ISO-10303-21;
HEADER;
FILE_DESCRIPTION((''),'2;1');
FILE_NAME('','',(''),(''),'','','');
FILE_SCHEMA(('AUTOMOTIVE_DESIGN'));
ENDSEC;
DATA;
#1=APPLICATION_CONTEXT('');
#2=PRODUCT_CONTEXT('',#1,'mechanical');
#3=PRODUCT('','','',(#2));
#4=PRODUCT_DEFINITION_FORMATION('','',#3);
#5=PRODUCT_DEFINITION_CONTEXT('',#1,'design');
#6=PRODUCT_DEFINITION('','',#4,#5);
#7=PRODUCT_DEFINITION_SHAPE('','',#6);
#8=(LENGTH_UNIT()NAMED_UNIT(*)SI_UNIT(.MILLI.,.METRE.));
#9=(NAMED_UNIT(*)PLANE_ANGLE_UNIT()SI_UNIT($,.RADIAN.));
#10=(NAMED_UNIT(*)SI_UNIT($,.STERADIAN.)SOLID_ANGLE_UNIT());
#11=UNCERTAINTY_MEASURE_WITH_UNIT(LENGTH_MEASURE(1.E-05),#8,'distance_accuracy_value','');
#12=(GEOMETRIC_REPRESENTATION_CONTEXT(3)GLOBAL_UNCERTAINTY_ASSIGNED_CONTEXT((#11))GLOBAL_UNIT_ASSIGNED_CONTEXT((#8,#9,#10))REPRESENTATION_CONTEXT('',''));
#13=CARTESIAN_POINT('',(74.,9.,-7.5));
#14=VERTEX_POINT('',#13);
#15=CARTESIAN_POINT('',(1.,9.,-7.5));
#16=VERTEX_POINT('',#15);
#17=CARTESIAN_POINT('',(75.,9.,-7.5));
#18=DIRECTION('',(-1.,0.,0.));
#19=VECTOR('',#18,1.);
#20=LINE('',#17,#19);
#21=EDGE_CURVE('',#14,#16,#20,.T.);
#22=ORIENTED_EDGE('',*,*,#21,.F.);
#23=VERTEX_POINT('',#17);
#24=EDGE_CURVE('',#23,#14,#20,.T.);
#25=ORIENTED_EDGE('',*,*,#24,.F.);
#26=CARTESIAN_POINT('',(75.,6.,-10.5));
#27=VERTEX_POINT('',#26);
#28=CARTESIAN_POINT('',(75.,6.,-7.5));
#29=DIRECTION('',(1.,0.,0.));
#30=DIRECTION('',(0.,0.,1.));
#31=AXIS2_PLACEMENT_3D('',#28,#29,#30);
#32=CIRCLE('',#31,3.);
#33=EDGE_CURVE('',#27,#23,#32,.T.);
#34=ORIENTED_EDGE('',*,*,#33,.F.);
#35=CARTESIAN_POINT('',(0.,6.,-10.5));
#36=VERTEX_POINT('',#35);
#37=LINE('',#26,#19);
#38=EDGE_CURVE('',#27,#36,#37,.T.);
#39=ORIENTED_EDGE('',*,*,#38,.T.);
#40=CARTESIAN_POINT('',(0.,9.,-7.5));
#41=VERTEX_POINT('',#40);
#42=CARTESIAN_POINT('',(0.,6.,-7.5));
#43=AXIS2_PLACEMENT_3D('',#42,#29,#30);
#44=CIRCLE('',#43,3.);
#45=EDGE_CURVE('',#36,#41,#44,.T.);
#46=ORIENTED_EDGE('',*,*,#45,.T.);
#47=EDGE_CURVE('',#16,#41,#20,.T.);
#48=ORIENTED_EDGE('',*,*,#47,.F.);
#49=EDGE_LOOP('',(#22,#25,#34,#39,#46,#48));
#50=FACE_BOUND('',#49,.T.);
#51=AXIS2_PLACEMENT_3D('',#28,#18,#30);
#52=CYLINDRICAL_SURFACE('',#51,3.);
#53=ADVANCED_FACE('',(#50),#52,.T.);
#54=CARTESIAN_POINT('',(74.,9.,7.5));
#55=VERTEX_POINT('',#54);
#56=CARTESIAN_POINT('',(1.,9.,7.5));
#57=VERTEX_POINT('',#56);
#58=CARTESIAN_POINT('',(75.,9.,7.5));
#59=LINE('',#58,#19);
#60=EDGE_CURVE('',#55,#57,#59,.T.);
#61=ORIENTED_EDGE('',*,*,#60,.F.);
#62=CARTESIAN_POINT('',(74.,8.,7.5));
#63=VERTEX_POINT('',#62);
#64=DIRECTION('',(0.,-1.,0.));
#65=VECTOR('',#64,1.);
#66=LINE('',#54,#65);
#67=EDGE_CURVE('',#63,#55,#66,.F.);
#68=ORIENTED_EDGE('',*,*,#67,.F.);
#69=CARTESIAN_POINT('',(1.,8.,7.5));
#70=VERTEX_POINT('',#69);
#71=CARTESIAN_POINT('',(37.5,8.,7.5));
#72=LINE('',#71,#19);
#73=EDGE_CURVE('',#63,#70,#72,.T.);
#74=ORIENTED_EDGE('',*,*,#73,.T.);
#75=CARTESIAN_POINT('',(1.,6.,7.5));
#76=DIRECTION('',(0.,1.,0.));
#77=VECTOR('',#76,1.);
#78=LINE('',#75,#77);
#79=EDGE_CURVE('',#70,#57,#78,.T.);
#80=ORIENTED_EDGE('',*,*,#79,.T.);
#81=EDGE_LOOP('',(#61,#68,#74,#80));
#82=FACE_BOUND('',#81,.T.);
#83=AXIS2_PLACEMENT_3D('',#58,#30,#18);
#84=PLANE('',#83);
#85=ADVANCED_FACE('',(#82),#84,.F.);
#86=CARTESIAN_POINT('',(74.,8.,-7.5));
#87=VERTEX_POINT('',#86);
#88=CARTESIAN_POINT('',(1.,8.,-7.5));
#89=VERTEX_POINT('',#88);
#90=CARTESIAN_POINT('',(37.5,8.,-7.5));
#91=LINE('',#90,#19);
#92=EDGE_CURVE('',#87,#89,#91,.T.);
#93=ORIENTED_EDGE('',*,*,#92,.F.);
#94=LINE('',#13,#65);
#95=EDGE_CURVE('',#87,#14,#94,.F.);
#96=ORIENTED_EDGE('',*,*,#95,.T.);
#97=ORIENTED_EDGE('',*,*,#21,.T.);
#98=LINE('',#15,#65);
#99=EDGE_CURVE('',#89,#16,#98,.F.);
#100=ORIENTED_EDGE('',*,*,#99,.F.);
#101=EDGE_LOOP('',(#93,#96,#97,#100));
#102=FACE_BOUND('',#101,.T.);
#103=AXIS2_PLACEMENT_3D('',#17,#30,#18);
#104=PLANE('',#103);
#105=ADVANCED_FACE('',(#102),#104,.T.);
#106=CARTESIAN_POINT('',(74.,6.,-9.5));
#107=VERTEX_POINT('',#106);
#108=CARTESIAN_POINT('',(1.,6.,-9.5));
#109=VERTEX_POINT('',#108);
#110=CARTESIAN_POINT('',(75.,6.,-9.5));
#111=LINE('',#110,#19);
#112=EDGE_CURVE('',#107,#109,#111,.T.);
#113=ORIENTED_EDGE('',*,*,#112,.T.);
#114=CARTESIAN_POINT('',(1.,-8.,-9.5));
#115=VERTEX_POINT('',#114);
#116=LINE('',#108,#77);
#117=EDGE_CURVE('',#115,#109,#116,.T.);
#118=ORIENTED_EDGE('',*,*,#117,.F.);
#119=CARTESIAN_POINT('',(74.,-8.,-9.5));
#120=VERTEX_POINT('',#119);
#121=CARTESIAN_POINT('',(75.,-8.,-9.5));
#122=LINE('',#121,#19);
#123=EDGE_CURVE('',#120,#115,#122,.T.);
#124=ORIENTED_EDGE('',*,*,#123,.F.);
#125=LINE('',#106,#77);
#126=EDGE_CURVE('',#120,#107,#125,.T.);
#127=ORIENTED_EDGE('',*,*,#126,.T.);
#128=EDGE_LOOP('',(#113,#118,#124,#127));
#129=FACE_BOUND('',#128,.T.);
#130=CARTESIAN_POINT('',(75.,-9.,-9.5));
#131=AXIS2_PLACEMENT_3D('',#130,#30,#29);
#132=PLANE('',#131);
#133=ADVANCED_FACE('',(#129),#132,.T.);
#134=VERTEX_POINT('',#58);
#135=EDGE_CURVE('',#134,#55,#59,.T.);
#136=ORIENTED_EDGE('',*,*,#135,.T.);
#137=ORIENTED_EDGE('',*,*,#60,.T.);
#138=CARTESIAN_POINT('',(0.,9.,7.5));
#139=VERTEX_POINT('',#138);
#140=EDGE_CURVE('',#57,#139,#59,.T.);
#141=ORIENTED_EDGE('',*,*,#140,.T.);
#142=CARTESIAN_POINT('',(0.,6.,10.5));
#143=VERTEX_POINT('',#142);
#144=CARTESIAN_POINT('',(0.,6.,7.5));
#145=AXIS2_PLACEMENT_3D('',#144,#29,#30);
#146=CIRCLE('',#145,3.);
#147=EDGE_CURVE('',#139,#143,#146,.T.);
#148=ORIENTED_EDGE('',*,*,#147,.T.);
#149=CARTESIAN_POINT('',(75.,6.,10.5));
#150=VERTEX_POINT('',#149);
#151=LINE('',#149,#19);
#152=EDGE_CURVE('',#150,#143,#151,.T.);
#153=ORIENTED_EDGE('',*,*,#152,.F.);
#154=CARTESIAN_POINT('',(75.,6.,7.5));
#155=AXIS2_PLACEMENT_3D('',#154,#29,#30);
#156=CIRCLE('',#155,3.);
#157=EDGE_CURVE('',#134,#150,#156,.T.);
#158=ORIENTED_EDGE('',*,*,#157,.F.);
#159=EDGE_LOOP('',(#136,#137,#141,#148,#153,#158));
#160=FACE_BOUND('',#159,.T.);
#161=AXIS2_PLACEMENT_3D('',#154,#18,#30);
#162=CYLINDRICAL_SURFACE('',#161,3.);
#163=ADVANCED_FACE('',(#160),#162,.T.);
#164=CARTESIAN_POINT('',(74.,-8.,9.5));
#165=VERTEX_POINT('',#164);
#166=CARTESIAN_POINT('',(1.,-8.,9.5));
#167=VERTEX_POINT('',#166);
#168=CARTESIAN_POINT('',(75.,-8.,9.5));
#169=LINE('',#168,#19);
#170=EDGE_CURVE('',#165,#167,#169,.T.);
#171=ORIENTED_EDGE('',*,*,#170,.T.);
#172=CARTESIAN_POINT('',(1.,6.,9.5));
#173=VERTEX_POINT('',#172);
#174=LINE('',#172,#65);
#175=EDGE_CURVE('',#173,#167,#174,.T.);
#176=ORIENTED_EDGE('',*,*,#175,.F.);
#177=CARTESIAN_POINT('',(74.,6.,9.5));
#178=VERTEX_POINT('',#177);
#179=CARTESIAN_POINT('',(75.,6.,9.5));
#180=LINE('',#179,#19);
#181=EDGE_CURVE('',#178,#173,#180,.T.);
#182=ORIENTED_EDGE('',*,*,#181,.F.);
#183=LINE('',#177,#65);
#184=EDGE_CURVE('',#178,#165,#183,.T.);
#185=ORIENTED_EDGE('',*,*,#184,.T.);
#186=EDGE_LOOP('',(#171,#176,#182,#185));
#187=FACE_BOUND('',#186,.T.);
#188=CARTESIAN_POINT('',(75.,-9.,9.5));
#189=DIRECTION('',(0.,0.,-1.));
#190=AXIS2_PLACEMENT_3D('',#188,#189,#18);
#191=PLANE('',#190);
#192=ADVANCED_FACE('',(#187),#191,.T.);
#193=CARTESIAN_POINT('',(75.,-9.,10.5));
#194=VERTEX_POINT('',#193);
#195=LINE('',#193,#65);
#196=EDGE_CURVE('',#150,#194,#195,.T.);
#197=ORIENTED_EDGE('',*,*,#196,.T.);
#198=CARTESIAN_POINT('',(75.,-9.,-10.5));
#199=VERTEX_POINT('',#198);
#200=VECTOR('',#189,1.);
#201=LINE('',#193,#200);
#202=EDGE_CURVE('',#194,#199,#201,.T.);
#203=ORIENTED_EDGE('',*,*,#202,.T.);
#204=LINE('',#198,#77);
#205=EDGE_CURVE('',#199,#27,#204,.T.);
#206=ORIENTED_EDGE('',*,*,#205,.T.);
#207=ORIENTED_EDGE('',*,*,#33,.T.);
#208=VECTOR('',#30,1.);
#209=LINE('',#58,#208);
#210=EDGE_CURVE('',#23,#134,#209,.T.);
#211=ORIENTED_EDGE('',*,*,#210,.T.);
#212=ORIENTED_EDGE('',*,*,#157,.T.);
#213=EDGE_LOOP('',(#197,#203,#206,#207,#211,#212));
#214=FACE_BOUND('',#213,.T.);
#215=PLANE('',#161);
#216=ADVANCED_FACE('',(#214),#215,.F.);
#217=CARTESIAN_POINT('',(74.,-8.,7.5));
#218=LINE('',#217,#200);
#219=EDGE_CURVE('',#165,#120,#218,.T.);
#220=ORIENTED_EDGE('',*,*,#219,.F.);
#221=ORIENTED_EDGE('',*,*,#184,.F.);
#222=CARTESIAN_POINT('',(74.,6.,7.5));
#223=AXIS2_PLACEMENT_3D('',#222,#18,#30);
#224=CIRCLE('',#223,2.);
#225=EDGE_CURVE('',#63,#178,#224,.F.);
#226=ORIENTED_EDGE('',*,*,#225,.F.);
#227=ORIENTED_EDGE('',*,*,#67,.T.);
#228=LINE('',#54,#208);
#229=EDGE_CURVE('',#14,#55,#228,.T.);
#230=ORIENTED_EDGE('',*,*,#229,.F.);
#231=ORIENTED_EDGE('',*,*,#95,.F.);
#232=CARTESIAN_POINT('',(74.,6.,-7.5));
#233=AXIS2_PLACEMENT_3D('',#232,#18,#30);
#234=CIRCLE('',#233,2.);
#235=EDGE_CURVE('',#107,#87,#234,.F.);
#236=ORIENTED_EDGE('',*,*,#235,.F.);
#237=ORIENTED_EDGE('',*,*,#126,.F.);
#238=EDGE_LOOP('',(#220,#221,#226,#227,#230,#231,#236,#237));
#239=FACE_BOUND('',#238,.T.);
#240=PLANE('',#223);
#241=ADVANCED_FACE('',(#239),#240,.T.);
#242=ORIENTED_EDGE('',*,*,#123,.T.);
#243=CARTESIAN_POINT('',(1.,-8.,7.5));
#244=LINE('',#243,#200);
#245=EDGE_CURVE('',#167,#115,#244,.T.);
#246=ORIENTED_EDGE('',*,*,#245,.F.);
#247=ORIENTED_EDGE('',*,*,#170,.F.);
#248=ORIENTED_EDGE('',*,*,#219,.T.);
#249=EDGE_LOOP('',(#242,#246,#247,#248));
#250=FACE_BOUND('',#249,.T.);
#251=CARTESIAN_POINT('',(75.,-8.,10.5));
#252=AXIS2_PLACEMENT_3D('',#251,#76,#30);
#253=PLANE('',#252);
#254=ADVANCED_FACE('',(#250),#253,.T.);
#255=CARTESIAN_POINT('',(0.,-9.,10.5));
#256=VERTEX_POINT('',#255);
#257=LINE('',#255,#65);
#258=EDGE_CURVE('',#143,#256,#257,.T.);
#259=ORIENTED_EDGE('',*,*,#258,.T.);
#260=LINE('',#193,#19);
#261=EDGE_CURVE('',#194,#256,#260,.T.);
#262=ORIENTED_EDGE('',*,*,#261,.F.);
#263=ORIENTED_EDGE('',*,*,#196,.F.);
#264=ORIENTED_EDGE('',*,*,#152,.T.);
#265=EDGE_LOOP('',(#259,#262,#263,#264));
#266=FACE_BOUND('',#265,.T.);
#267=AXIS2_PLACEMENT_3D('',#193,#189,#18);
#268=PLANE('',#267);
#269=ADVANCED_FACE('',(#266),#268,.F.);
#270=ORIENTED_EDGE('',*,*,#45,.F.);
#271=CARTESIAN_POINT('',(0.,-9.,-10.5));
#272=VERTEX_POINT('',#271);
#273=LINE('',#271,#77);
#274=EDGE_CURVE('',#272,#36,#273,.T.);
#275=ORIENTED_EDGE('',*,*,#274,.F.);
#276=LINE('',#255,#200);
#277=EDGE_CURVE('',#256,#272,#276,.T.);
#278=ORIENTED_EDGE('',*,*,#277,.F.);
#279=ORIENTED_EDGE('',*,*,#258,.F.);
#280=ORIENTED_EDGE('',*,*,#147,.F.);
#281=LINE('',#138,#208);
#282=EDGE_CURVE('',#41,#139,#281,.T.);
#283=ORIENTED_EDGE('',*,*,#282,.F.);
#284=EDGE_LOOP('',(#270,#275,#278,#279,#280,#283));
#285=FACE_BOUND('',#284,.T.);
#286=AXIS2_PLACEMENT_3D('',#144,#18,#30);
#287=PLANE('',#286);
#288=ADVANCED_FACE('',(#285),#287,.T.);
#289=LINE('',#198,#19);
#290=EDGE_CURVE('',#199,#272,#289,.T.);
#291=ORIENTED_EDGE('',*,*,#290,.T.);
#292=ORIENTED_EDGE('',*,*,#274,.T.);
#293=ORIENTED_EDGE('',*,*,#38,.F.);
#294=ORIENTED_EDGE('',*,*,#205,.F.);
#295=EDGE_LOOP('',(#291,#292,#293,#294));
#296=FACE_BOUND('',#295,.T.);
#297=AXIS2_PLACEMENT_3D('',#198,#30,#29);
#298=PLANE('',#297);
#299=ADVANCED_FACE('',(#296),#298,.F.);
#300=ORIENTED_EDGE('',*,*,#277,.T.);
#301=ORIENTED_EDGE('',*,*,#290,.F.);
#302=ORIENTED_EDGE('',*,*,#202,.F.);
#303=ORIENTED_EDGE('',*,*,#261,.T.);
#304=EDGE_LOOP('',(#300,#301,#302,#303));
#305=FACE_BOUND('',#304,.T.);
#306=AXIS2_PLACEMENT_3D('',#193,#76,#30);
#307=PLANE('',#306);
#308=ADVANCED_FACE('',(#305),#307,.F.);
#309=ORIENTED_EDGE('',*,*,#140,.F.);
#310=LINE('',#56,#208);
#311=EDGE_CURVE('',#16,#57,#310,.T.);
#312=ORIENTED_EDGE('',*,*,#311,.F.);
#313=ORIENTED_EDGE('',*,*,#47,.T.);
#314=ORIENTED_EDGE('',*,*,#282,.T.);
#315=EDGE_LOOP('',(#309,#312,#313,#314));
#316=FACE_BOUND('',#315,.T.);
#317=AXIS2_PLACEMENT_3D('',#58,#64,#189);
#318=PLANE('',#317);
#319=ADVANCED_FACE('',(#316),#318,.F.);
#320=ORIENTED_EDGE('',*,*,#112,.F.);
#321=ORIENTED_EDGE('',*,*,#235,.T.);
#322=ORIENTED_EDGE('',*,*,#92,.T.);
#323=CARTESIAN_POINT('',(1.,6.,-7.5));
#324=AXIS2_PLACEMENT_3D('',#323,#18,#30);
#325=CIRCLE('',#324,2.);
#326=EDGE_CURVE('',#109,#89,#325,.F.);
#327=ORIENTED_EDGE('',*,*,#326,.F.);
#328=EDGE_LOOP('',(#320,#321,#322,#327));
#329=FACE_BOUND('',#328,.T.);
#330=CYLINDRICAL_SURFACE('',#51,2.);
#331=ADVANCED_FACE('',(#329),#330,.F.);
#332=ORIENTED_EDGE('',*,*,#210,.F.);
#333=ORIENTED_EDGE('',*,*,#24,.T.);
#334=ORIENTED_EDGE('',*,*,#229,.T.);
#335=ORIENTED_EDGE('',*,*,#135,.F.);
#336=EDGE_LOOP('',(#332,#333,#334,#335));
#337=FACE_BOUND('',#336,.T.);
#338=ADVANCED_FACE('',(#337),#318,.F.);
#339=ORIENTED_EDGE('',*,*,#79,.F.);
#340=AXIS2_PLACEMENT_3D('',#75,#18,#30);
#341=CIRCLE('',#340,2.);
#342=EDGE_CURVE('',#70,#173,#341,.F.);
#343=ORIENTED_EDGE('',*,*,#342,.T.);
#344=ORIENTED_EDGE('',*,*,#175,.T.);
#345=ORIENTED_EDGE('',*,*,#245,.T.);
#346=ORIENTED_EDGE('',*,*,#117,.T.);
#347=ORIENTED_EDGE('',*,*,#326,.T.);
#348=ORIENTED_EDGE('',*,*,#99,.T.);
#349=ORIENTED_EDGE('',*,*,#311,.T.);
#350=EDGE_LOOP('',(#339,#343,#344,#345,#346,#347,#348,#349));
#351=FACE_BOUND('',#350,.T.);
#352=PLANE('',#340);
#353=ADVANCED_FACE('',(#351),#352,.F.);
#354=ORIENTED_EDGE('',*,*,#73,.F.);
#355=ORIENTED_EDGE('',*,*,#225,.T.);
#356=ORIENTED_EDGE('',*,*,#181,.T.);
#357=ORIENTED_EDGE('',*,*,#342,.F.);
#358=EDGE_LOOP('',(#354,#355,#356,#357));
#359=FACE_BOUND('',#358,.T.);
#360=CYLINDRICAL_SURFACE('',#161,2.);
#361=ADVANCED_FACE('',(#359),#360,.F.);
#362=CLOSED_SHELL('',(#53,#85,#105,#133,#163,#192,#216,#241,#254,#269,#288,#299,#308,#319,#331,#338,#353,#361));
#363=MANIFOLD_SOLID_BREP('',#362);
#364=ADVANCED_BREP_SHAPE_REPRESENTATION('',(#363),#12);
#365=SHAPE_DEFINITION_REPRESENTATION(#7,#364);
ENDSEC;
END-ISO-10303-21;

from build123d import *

# Parameters (mm, degrees)
BOSS_EXTRUDE1_DEPTH = 75
SHELL1_START        = 1
SHELL1_DEPTH        = 73


# Read off the part's stored shape, not the designer's step: Shell1
with BuildPart() as part:
    # Sketch2 → Boss-Extrude1 (new body)
    with BuildSketch(Plane(origin=(0, 0, 0), x_dir=(0, 0, -1), z_dir=(1, 0, 0))):
        with BuildLine():
            Line((-10.5, -9), (10.5, -9))
            Line((10.5, -9), (10.5, 6))
            ThreePointArc((10.5, 6), (9.621320344, 8.121320344), (7.5, 9))
            Line((7.5, 9), (-7.5, 9))
            ThreePointArc((-7.5, 9), (-9.621320344, 8.121320344), (-10.5, 6))
            Line((-10.5, 6), (-10.5, -9))
        make_face()
    extrude(amount=BOSS_EXTRUDE1_DEPTH)

    # Shell1 outline → Shell1 (cut)
    with BuildSketch(Plane.YZ.offset(SHELL1_START)):
        with BuildLine():
            Line((8, -7.5), (9, -7.5))
            Line((9, -7.5), (9, 7.5))
            Line((9, 7.5), (8, 7.5))
            ThreePointArc((8, 7.5), (7.414213562, 8.914213562), (6, 9.5))
            Line((6, 9.5), (-8, 9.5))
            Line((-8, 9.5), (-8, -9.5))
            Line((-8, -9.5), (6, -9.5))
            ThreePointArc((6, -9.5), (7.414213562, -8.914213562), (8, -7.5))
        make_face()
    extrude(amount=SHELL1_DEPTH, mode=Mode.SUBTRACT)


solid = part.part
